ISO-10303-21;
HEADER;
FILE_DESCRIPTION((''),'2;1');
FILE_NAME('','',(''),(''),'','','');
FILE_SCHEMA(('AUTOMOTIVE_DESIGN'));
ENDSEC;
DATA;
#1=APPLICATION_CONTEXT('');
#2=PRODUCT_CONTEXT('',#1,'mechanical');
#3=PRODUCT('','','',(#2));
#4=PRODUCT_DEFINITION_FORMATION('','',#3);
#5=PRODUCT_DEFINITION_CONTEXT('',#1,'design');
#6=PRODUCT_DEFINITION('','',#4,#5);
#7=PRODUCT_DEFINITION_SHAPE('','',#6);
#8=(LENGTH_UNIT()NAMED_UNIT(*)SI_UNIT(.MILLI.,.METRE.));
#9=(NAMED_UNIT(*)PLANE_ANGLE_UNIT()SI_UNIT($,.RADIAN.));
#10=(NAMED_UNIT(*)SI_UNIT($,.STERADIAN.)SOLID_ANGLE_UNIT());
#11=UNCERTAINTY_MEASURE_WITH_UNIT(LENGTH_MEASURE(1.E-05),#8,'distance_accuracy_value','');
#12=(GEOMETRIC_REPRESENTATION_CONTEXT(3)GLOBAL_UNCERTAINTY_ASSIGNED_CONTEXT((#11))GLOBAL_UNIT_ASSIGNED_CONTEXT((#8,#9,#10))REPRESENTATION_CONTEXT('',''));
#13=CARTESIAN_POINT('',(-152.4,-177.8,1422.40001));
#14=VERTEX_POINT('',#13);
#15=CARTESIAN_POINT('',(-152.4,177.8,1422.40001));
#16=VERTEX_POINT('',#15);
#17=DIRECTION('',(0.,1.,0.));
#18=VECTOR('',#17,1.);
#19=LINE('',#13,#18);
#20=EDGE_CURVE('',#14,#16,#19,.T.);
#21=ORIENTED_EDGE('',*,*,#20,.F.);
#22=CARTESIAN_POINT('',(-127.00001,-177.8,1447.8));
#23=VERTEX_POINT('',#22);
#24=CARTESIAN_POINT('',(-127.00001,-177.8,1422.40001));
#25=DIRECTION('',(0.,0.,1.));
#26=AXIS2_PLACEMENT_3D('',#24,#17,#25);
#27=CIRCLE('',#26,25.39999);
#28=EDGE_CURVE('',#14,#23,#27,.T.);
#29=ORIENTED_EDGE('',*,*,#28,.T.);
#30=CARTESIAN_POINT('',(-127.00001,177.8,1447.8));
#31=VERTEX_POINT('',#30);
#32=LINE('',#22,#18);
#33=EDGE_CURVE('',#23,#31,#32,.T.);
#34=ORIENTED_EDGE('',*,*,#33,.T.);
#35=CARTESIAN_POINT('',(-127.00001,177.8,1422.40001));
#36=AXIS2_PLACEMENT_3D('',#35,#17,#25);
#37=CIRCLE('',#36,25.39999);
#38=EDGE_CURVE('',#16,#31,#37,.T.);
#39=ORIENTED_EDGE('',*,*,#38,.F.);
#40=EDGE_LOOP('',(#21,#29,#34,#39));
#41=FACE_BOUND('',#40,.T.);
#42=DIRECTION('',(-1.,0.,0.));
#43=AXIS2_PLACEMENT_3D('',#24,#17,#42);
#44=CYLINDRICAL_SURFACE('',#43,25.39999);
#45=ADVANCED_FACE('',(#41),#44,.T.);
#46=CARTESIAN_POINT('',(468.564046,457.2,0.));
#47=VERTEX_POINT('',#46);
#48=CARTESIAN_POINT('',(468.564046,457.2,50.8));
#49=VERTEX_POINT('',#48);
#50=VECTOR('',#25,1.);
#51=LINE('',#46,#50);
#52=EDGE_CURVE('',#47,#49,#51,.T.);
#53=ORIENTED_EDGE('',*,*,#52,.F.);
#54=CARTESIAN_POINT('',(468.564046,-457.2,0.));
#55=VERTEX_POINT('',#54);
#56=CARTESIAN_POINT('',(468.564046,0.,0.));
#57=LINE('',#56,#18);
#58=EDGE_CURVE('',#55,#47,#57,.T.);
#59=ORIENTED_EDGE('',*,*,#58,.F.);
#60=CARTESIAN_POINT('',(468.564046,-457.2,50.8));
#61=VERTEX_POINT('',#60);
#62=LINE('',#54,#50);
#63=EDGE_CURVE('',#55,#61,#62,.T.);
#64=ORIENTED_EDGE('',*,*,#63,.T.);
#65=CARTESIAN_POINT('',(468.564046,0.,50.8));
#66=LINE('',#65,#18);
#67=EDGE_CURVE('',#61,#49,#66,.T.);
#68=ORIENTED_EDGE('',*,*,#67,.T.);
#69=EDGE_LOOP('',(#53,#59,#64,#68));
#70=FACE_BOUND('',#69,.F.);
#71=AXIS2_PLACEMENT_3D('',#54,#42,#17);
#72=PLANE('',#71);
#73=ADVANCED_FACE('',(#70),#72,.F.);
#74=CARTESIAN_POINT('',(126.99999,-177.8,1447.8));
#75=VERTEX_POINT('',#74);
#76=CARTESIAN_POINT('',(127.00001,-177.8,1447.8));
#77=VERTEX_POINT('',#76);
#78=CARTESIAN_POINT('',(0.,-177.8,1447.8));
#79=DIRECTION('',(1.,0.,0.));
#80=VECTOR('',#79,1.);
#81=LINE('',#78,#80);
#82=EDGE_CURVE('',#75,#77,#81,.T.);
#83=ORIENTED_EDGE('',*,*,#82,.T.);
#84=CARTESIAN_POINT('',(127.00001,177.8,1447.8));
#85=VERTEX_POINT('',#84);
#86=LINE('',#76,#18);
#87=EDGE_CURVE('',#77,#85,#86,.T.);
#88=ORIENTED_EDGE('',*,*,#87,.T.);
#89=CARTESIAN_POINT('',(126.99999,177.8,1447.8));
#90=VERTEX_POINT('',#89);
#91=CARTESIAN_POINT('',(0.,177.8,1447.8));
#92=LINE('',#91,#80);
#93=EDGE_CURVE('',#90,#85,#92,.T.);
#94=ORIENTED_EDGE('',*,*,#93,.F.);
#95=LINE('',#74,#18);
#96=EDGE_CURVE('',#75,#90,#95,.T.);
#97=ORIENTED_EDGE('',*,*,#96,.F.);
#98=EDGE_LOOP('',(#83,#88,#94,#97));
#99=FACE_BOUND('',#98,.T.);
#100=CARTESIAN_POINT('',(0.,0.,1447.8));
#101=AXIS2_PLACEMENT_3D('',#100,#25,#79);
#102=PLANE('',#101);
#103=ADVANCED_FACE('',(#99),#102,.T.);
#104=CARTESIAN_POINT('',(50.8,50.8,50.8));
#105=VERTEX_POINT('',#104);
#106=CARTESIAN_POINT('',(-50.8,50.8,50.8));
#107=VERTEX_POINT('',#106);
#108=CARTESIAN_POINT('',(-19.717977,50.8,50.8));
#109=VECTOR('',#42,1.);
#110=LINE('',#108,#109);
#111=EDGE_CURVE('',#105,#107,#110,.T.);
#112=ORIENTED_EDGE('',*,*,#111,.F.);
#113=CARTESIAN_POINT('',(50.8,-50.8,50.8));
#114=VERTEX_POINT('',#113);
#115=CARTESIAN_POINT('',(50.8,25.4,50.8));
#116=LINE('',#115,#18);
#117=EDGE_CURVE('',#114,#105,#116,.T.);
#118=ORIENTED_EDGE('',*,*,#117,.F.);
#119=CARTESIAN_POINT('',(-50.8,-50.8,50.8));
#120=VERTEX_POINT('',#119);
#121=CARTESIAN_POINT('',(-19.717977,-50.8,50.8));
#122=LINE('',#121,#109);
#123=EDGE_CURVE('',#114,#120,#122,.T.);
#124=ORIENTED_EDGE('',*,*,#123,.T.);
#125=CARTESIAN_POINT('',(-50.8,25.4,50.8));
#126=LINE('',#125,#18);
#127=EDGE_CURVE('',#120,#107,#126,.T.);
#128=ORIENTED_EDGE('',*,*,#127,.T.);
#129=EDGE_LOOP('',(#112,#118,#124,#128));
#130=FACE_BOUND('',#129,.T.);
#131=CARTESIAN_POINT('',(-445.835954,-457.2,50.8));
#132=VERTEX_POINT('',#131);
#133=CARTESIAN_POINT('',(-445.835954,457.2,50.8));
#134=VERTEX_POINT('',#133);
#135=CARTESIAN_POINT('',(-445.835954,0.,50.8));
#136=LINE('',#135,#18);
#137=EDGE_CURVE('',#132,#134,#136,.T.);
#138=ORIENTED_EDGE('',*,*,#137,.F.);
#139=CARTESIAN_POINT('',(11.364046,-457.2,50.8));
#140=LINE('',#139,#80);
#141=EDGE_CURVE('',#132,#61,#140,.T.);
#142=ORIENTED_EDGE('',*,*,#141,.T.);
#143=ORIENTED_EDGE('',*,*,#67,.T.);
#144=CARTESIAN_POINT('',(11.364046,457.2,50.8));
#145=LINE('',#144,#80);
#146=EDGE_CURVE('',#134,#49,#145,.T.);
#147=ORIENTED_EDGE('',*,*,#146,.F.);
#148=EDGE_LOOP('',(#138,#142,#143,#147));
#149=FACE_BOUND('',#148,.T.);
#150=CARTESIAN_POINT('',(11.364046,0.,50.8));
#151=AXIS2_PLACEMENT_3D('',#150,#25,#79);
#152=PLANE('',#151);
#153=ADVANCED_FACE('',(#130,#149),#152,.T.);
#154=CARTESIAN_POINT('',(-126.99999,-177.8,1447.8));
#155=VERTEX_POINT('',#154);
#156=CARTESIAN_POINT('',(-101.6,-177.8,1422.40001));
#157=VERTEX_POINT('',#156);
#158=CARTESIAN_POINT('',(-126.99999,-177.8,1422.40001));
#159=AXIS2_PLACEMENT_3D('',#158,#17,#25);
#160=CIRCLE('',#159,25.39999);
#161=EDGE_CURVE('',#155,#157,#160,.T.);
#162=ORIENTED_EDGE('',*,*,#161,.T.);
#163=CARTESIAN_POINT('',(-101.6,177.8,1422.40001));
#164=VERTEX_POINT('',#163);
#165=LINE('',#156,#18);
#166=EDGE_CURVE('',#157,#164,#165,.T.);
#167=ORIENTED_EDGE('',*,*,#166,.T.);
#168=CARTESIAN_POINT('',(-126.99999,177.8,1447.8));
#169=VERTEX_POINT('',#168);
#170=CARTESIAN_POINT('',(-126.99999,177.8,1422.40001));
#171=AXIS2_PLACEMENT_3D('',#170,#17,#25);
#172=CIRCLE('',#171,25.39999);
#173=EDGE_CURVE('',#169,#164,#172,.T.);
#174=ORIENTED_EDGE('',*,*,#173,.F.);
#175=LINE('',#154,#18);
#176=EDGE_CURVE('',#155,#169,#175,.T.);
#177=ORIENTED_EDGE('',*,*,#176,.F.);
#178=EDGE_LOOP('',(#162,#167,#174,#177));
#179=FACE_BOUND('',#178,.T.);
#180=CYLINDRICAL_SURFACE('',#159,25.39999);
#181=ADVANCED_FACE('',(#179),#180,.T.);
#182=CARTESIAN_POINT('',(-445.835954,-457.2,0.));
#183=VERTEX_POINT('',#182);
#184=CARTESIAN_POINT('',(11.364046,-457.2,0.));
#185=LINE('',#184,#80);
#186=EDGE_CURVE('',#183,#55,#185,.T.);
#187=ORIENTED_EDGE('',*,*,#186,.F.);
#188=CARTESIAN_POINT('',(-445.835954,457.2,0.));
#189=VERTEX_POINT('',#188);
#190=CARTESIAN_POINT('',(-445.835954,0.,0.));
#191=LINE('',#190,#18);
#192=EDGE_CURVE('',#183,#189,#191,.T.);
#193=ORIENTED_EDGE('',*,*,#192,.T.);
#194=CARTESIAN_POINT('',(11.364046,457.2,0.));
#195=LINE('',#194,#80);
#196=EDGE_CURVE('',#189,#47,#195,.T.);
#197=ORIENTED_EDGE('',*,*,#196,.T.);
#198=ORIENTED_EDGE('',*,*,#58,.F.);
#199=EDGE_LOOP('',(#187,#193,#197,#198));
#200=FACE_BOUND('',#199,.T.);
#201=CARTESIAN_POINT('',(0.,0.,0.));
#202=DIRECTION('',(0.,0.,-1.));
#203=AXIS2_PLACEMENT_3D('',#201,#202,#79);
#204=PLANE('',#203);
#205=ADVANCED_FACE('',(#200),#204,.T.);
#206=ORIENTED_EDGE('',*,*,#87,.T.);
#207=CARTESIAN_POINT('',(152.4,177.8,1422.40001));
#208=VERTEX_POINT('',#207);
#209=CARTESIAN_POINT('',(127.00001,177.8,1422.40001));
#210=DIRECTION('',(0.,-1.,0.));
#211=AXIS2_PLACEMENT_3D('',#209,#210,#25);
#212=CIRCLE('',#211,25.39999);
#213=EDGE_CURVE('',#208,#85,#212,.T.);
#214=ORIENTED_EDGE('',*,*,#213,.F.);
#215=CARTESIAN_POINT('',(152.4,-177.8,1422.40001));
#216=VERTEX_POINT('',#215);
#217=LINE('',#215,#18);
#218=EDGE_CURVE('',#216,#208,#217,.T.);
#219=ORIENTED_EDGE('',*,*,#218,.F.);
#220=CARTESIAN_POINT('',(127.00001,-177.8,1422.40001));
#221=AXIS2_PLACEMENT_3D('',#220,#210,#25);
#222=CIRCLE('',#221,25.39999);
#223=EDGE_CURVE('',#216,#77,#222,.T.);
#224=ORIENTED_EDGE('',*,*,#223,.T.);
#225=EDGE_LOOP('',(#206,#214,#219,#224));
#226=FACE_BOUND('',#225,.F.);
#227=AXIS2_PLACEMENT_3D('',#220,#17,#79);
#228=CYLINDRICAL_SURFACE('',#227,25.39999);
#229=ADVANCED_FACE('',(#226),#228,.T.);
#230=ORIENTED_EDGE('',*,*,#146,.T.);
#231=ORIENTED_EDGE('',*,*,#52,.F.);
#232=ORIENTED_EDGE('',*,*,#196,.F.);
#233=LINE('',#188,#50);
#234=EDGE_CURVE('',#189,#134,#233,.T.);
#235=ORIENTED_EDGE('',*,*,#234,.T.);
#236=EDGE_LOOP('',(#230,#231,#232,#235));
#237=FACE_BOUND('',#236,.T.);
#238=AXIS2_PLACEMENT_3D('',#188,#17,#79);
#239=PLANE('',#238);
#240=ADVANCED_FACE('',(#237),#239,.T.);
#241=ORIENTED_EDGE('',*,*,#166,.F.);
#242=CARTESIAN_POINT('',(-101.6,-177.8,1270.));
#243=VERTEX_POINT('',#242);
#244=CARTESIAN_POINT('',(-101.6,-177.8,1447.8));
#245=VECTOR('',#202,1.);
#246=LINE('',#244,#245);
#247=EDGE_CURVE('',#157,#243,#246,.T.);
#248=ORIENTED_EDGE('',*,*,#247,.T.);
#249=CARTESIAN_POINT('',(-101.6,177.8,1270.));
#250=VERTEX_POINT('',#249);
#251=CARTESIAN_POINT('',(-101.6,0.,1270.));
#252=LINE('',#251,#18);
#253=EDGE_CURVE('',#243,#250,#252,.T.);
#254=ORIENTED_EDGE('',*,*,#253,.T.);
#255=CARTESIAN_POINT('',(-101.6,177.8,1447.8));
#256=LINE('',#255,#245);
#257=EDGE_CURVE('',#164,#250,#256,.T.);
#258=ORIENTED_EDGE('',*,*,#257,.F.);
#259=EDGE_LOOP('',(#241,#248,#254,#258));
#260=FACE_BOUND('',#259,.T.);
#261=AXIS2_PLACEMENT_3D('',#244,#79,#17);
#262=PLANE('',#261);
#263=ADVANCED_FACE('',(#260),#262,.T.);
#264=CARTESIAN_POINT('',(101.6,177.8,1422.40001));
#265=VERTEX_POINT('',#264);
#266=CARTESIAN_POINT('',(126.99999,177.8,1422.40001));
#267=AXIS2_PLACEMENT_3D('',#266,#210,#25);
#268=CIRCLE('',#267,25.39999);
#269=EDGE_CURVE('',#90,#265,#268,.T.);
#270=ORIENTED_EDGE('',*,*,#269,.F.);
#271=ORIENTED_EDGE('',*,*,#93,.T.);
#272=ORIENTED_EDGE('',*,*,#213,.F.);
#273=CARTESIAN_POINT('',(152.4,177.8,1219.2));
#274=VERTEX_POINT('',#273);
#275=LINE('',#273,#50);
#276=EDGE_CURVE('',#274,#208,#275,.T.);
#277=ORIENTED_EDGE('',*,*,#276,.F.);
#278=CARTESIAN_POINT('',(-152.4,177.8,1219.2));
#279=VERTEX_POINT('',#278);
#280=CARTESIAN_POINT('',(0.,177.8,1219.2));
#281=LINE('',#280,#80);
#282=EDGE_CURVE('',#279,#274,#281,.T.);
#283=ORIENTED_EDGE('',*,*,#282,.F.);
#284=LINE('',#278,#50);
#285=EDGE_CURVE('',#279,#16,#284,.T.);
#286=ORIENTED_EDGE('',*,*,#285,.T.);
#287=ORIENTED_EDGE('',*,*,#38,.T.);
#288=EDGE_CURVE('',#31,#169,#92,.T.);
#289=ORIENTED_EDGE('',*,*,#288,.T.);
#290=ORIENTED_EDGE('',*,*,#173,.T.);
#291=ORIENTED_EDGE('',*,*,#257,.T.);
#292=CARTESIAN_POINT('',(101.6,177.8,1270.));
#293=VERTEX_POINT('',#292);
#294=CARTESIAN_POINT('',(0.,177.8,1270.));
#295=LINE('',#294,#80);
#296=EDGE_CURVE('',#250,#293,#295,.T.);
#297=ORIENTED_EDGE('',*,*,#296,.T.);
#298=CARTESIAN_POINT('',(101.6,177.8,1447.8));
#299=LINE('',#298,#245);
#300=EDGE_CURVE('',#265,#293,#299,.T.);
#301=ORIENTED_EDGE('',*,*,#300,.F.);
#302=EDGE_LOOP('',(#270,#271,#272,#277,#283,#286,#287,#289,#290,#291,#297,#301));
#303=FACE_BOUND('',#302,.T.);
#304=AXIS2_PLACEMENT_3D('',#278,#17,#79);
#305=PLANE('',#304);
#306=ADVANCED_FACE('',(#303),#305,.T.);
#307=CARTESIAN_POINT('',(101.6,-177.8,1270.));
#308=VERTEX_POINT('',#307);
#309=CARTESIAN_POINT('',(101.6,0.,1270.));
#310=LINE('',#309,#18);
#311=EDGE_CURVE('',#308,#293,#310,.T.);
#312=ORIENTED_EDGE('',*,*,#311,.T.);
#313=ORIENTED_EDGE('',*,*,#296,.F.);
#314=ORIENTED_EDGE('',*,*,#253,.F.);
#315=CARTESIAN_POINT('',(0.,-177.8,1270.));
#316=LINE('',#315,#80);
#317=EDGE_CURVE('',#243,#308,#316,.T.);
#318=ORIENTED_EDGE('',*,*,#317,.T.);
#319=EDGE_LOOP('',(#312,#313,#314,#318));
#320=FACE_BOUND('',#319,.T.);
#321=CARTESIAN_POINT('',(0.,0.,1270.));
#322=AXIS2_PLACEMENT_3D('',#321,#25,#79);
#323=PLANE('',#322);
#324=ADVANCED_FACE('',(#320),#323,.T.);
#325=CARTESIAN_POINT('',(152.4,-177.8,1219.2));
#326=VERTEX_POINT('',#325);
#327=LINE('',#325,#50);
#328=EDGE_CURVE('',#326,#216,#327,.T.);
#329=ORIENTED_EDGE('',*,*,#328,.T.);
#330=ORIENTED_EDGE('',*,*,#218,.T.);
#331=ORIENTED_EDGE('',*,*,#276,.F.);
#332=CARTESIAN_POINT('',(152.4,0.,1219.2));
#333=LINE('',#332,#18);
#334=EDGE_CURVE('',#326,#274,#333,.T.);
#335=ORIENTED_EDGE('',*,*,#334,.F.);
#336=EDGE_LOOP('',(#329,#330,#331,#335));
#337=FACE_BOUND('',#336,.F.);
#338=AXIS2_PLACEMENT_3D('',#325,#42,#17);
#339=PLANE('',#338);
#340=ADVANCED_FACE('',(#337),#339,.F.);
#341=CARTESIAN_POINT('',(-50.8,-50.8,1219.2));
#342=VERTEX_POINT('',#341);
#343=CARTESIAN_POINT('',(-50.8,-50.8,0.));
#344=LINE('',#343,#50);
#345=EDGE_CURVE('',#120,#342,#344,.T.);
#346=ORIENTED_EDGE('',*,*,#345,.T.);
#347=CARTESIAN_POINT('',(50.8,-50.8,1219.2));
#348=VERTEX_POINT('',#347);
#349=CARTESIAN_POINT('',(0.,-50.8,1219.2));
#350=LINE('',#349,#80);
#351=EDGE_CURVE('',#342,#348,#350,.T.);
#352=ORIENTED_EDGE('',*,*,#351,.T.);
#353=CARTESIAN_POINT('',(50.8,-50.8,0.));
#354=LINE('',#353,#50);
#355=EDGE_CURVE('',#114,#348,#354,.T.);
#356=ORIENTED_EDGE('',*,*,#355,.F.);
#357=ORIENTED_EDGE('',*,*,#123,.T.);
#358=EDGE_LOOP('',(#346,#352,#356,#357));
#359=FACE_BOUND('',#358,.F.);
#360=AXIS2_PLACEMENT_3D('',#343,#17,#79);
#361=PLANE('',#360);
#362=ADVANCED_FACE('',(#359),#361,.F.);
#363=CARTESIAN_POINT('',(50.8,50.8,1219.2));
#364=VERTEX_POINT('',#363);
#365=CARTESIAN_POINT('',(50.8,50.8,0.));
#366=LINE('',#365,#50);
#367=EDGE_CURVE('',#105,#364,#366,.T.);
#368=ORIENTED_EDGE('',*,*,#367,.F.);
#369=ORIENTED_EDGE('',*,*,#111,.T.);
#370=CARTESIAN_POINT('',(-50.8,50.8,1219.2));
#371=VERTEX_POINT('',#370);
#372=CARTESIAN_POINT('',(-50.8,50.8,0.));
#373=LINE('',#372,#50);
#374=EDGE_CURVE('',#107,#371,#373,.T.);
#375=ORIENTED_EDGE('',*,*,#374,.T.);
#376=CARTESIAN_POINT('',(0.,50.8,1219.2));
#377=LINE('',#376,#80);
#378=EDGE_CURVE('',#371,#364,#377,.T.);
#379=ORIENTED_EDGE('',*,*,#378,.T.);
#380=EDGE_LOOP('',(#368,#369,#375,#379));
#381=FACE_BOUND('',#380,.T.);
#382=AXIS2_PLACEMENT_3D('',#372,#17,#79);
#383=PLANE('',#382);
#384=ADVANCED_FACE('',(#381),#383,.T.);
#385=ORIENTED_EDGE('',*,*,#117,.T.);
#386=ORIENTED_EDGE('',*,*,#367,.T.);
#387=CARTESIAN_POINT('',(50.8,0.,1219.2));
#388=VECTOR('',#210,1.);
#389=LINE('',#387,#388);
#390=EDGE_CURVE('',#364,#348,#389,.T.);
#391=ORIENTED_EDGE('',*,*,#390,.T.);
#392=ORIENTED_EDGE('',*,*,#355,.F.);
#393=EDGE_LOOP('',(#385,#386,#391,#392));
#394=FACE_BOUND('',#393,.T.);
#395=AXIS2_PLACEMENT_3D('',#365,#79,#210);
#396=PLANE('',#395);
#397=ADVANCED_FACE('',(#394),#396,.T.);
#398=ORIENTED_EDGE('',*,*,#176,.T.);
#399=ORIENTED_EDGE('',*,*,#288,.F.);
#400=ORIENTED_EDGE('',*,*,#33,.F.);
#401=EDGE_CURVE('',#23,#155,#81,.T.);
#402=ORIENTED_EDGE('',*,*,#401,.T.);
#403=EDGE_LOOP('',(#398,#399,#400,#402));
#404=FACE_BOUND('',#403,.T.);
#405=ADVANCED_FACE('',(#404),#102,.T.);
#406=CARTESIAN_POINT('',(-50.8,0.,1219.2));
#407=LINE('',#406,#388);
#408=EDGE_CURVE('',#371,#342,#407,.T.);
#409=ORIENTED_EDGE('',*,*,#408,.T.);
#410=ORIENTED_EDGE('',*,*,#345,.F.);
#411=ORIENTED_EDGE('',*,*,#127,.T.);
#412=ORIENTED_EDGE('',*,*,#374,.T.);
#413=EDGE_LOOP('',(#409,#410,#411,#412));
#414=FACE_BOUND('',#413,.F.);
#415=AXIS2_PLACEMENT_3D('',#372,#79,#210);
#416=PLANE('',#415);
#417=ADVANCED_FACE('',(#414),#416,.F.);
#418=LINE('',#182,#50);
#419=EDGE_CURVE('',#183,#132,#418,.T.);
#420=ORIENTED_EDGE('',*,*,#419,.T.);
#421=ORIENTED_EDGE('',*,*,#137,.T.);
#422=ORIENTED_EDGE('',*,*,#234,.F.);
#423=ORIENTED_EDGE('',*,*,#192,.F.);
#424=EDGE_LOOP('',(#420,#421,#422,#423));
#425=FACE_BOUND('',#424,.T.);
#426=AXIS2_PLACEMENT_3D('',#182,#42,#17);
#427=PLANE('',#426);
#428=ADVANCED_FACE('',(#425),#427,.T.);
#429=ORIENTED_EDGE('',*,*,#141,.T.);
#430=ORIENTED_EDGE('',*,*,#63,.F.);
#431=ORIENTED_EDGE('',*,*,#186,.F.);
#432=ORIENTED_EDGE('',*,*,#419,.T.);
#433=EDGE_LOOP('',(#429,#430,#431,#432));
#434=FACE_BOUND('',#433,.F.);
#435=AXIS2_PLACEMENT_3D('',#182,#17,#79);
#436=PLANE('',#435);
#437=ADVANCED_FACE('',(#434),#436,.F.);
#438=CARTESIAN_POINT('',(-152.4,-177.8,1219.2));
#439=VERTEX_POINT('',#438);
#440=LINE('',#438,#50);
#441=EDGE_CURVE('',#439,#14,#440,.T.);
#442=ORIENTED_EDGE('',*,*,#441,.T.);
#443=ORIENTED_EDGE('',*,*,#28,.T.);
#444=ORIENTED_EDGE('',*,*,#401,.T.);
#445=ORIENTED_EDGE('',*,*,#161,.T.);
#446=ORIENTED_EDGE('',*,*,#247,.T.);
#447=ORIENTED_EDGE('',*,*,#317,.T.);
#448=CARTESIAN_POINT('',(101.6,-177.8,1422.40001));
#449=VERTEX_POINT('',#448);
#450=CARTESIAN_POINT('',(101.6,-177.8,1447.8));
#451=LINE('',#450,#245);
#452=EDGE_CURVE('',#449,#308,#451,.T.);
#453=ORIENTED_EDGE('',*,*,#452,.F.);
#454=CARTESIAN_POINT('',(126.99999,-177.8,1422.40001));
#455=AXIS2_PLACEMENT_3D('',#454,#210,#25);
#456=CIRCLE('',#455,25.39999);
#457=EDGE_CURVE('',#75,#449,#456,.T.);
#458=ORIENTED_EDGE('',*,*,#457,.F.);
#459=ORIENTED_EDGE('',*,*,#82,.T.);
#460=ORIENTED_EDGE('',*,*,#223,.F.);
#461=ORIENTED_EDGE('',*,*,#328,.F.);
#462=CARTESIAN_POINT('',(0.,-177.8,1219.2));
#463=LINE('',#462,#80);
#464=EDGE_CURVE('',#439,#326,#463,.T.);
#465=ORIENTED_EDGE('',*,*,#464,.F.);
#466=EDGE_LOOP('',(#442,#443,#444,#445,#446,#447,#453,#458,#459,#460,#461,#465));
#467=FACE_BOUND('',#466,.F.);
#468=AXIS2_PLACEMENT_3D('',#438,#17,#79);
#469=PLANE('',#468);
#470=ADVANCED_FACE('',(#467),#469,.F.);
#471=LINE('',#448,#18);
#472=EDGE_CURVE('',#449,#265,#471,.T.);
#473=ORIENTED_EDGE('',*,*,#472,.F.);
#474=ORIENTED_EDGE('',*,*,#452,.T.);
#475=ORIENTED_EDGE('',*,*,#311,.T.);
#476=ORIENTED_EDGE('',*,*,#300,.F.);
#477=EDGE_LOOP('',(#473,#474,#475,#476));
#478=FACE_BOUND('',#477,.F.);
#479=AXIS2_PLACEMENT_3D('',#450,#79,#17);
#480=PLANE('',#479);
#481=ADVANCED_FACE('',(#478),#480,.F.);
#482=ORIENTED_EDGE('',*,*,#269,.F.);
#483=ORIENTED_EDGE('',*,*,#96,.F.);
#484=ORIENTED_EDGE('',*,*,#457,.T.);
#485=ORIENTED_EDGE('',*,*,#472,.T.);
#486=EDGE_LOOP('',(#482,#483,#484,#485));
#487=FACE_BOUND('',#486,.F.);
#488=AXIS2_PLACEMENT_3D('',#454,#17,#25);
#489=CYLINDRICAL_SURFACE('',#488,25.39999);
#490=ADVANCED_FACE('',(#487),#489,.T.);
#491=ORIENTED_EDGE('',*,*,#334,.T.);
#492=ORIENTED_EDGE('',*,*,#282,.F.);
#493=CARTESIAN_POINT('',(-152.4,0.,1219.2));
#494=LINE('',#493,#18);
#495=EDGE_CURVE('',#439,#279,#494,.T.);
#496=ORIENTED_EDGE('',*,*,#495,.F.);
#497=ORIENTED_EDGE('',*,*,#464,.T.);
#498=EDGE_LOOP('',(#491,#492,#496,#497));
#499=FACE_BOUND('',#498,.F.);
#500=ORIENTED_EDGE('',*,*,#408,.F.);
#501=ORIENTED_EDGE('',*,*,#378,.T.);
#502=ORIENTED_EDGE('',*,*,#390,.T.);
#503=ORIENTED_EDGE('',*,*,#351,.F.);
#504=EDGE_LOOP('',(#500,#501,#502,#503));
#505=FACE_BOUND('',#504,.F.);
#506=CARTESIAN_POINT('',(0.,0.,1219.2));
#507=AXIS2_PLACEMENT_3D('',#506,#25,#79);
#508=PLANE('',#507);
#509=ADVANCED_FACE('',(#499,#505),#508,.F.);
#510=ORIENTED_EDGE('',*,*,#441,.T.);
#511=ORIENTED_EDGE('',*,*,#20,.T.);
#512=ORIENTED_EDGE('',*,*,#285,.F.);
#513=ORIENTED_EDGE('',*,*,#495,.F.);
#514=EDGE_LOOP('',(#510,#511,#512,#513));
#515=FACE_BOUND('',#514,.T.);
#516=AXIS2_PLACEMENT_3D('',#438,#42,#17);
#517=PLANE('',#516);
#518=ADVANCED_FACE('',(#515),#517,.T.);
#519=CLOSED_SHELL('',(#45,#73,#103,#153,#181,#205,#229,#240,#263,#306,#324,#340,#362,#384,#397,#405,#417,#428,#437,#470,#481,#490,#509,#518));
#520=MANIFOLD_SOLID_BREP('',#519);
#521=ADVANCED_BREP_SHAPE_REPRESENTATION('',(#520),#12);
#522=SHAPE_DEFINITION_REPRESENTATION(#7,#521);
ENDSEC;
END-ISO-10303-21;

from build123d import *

# Parameters (mm, degrees)
F0_W     = 914.4
F0_H     = 914.4
F1_DEPTH = 50.8
F2_W     = 101.6
F2_H     = 101.6
F3_DEPTH = 1219.2
F4_W     = 304.8
F4_H     = 355.6
F5_DEPTH = 228.6
F6_W     = 203.2
F6_H     = 355.6
F7_DEPTH = 177.8
F8_R     = 25.39999


# Not quite as in the source:
# - a fillet or chamfer is up to 0.001 mm smaller than in the source, because OpenCascade refuses the exact size
# - a feature names something its author has since deleted; it is built from what else it names


with BuildPart() as f1:
    # F0 (on Top) → F1 (new body)
    with BuildSketch(Plane.XY):
        with Locations((11.3640455229, 0)):
            Rectangle(F0_W, F0_H)
    extrude(amount=F1_DEPTH)

    # F2 (on face) → F3 (join)
    with BuildSketch(Plane(origin=(0, 0, 0), x_dir=(1, 0, 0), z_dir=(0, 0, -1))):
        Rectangle(F2_W, F2_H)
    extrude(amount=-F3_DEPTH)

    # F4 (on face) → F5 (join)
    with BuildSketch(Plane.XY.offset(1219.2)):
        Rectangle(F4_W, F4_H)
    extrude(amount=F5_DEPTH)

    # F6 (on face) → F7 (cut)
    with BuildSketch(Plane.XY.offset(1447.8)):
        Rectangle(F6_W, F6_H)
    extrude(amount=-F7_DEPTH, mode=Mode.SUBTRACT)

    # F8 (radius 25.4 in the source; OpenCascade refuses exactly that, so slightly less here)
    f8_edges = [f1.edges().sort_by_distance(p)[0] for p in [
        (-152.4, 0, 1447.8),
        (-101.6, 0, 1447.8),
        (101.6, 0, 1447.8),
        (152.4, 0, 1447.8),
    ]]
    fillet(f8_edges, radius=F8_R)


solid = f1.part
